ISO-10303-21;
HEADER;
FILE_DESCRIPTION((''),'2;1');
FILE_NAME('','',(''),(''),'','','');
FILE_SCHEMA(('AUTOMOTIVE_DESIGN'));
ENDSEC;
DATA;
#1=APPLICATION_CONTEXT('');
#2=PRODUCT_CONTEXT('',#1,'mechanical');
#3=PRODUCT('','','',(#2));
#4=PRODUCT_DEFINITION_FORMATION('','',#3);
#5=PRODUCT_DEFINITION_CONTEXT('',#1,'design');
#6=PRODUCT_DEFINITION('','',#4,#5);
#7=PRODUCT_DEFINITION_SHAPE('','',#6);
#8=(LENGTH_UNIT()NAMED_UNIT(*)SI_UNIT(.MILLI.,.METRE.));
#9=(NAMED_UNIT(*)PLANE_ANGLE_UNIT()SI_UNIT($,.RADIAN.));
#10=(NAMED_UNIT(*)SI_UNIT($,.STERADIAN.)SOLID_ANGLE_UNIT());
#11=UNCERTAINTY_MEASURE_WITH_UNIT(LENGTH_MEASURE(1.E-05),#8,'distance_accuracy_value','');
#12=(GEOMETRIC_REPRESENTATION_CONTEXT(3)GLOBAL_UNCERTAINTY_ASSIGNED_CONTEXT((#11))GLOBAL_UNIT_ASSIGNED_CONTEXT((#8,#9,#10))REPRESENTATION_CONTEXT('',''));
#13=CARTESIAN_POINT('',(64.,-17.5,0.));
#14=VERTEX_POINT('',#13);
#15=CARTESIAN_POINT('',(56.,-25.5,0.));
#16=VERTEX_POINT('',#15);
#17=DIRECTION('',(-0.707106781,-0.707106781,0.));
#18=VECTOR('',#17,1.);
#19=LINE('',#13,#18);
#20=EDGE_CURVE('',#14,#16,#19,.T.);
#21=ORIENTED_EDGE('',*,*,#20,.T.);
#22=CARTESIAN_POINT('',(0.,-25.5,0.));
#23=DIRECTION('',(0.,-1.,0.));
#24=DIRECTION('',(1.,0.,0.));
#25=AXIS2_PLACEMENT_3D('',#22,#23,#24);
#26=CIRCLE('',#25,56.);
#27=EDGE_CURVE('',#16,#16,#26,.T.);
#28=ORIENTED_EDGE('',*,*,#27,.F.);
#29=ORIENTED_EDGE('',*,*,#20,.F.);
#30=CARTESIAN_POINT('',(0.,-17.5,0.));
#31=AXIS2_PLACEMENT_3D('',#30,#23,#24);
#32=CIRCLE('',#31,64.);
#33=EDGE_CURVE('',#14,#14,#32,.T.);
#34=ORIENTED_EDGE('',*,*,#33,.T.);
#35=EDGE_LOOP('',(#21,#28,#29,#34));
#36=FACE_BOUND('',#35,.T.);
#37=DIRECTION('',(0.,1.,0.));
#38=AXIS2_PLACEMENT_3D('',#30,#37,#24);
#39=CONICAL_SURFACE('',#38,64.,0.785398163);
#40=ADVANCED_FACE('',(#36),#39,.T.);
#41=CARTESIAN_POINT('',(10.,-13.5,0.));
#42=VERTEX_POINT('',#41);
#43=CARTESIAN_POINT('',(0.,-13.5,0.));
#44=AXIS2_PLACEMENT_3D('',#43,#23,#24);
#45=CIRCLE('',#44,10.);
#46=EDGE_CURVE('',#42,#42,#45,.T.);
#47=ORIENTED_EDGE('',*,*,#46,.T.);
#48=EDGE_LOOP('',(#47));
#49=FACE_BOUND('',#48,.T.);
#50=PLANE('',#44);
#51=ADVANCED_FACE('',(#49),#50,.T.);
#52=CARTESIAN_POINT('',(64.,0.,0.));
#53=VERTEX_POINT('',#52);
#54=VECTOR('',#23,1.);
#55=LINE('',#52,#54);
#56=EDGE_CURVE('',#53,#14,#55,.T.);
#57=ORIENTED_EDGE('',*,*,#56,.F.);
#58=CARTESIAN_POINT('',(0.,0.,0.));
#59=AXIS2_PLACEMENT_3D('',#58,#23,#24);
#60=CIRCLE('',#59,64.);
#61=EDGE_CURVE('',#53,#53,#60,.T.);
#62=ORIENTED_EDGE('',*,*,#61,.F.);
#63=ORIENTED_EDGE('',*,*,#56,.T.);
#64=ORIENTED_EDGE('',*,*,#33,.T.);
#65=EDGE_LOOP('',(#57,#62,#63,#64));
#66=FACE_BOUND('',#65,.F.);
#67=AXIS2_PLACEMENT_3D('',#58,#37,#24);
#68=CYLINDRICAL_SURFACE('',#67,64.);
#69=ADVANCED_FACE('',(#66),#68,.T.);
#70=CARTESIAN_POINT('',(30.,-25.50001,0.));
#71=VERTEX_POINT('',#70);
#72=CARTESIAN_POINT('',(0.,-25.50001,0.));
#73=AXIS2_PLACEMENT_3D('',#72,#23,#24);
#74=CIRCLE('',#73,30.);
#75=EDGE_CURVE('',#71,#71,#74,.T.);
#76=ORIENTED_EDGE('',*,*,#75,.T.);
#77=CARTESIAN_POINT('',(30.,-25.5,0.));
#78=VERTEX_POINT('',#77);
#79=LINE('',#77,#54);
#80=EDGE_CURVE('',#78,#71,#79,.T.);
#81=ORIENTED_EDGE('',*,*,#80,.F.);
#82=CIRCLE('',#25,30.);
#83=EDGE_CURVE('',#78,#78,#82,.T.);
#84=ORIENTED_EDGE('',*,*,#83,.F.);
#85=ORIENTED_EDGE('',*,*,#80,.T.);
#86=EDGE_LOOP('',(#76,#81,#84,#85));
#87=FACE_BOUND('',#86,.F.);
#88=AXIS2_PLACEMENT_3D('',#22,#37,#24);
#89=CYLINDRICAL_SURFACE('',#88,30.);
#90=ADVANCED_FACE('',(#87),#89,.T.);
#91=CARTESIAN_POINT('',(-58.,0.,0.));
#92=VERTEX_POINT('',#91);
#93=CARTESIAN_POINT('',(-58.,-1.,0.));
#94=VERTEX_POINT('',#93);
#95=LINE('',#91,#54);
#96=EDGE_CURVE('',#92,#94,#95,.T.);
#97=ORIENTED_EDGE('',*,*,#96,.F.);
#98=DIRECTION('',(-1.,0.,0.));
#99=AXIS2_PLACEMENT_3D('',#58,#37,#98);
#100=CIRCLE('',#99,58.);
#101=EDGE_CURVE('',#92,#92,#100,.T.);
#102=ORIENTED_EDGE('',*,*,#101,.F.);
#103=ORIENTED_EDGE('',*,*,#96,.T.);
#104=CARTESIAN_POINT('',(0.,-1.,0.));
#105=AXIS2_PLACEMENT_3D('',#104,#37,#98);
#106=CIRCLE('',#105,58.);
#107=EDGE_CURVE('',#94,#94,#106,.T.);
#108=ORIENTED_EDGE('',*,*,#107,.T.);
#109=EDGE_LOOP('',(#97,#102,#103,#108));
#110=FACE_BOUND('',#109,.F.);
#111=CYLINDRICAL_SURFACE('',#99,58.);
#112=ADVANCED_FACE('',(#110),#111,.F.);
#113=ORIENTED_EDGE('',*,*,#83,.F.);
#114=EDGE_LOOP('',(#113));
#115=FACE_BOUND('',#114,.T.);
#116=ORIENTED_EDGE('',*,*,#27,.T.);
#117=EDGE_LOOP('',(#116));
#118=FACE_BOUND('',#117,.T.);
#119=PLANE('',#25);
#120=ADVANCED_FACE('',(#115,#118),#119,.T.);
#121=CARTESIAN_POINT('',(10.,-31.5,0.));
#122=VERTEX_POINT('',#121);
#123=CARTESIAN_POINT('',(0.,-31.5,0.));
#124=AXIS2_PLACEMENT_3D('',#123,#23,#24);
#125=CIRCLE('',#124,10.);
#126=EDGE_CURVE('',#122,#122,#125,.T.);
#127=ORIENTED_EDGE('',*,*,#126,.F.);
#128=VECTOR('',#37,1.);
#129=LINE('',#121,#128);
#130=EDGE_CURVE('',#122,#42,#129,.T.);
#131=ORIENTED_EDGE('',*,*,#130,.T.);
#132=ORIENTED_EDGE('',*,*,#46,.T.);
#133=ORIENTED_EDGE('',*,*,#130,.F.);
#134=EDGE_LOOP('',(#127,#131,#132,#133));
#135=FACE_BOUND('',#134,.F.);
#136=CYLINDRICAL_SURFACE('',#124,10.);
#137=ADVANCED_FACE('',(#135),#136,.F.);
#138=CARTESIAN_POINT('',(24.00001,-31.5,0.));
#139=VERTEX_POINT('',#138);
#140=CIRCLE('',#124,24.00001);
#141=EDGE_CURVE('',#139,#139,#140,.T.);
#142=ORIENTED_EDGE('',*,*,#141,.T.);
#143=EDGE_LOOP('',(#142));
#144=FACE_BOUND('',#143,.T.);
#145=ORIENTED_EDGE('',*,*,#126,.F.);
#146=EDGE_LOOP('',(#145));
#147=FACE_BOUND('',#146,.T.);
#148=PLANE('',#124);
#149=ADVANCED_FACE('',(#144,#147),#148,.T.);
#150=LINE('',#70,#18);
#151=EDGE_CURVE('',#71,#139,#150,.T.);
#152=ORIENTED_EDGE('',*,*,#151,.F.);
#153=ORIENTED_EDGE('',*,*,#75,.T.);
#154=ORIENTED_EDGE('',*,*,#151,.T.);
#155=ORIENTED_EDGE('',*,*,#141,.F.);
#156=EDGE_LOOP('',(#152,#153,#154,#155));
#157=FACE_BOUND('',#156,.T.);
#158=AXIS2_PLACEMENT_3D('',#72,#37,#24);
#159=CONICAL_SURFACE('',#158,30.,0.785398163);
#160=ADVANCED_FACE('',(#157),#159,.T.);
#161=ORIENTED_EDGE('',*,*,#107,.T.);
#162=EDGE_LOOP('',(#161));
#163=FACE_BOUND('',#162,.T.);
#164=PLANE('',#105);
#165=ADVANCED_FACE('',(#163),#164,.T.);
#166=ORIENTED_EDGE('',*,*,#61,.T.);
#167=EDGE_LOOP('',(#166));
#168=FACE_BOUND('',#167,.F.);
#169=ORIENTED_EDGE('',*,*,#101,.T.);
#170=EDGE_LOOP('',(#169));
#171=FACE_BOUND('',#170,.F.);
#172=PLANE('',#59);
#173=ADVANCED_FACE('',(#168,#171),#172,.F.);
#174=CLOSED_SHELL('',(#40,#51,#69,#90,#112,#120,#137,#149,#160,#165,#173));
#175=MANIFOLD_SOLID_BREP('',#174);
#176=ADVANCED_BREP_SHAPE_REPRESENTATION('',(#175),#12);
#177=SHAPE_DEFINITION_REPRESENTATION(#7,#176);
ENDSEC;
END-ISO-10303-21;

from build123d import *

# Parameters (mm, degrees)
F0_R      = 64
F1_DEPTH  = 25.5
F2_R      = 58
F3_DEPTH  = 1
F4_SIZE   = 8
F5_R      = 30
F6_DEPTH  = 6
F7_SIZE   = 5.99999
F9_R      = 10
F10_DEPTH = 18


# Not quite as in the source:
# - a fillet or chamfer is up to 0.001 mm smaller than in the source, because OpenCascade refuses the exact size


with BuildPart() as f1:
    # F0 (on Front) → F1 (new body)
    with BuildSketch(Plane.XZ):
        Circle(F0_R)
    extrude(amount=F1_DEPTH)

    # F2 (on face) → F3 (cut)
    with BuildSketch(Plane(origin=(0, 0, 0), x_dir=(-1, 0, 0), z_dir=(0, 1, 0))):
        Circle(F2_R)
    extrude(amount=-F3_DEPTH, mode=Mode.SUBTRACT)

    # F4
    f4_edges = [f1.edges().sort_by_distance(p)[0] for p in [
        (-64, -25.5, 0),
    ]]
    chamfer(f4_edges, length=F4_SIZE)

    # F5 (on face) → F6 (join)
    with BuildSketch(Plane.XZ.offset(25.5)):
        Circle(F5_R)
    extrude(amount=F6_DEPTH)

    # F7 (size 6 in the source; OpenCascade refuses exactly that, so slightly less here)
    f7_edges = [f1.edges().sort_by_distance(p)[0] for p in [
        (-30, -31.5, 0),
    ]]
    chamfer(f7_edges, length=F7_SIZE)

    # F9 (on face) → F10 (cut)
    with BuildSketch(Plane.XZ.offset(31.5)):
        Circle(F9_R)
    extrude(amount=-F10_DEPTH, mode=Mode.SUBTRACT)


solid = f1.part
